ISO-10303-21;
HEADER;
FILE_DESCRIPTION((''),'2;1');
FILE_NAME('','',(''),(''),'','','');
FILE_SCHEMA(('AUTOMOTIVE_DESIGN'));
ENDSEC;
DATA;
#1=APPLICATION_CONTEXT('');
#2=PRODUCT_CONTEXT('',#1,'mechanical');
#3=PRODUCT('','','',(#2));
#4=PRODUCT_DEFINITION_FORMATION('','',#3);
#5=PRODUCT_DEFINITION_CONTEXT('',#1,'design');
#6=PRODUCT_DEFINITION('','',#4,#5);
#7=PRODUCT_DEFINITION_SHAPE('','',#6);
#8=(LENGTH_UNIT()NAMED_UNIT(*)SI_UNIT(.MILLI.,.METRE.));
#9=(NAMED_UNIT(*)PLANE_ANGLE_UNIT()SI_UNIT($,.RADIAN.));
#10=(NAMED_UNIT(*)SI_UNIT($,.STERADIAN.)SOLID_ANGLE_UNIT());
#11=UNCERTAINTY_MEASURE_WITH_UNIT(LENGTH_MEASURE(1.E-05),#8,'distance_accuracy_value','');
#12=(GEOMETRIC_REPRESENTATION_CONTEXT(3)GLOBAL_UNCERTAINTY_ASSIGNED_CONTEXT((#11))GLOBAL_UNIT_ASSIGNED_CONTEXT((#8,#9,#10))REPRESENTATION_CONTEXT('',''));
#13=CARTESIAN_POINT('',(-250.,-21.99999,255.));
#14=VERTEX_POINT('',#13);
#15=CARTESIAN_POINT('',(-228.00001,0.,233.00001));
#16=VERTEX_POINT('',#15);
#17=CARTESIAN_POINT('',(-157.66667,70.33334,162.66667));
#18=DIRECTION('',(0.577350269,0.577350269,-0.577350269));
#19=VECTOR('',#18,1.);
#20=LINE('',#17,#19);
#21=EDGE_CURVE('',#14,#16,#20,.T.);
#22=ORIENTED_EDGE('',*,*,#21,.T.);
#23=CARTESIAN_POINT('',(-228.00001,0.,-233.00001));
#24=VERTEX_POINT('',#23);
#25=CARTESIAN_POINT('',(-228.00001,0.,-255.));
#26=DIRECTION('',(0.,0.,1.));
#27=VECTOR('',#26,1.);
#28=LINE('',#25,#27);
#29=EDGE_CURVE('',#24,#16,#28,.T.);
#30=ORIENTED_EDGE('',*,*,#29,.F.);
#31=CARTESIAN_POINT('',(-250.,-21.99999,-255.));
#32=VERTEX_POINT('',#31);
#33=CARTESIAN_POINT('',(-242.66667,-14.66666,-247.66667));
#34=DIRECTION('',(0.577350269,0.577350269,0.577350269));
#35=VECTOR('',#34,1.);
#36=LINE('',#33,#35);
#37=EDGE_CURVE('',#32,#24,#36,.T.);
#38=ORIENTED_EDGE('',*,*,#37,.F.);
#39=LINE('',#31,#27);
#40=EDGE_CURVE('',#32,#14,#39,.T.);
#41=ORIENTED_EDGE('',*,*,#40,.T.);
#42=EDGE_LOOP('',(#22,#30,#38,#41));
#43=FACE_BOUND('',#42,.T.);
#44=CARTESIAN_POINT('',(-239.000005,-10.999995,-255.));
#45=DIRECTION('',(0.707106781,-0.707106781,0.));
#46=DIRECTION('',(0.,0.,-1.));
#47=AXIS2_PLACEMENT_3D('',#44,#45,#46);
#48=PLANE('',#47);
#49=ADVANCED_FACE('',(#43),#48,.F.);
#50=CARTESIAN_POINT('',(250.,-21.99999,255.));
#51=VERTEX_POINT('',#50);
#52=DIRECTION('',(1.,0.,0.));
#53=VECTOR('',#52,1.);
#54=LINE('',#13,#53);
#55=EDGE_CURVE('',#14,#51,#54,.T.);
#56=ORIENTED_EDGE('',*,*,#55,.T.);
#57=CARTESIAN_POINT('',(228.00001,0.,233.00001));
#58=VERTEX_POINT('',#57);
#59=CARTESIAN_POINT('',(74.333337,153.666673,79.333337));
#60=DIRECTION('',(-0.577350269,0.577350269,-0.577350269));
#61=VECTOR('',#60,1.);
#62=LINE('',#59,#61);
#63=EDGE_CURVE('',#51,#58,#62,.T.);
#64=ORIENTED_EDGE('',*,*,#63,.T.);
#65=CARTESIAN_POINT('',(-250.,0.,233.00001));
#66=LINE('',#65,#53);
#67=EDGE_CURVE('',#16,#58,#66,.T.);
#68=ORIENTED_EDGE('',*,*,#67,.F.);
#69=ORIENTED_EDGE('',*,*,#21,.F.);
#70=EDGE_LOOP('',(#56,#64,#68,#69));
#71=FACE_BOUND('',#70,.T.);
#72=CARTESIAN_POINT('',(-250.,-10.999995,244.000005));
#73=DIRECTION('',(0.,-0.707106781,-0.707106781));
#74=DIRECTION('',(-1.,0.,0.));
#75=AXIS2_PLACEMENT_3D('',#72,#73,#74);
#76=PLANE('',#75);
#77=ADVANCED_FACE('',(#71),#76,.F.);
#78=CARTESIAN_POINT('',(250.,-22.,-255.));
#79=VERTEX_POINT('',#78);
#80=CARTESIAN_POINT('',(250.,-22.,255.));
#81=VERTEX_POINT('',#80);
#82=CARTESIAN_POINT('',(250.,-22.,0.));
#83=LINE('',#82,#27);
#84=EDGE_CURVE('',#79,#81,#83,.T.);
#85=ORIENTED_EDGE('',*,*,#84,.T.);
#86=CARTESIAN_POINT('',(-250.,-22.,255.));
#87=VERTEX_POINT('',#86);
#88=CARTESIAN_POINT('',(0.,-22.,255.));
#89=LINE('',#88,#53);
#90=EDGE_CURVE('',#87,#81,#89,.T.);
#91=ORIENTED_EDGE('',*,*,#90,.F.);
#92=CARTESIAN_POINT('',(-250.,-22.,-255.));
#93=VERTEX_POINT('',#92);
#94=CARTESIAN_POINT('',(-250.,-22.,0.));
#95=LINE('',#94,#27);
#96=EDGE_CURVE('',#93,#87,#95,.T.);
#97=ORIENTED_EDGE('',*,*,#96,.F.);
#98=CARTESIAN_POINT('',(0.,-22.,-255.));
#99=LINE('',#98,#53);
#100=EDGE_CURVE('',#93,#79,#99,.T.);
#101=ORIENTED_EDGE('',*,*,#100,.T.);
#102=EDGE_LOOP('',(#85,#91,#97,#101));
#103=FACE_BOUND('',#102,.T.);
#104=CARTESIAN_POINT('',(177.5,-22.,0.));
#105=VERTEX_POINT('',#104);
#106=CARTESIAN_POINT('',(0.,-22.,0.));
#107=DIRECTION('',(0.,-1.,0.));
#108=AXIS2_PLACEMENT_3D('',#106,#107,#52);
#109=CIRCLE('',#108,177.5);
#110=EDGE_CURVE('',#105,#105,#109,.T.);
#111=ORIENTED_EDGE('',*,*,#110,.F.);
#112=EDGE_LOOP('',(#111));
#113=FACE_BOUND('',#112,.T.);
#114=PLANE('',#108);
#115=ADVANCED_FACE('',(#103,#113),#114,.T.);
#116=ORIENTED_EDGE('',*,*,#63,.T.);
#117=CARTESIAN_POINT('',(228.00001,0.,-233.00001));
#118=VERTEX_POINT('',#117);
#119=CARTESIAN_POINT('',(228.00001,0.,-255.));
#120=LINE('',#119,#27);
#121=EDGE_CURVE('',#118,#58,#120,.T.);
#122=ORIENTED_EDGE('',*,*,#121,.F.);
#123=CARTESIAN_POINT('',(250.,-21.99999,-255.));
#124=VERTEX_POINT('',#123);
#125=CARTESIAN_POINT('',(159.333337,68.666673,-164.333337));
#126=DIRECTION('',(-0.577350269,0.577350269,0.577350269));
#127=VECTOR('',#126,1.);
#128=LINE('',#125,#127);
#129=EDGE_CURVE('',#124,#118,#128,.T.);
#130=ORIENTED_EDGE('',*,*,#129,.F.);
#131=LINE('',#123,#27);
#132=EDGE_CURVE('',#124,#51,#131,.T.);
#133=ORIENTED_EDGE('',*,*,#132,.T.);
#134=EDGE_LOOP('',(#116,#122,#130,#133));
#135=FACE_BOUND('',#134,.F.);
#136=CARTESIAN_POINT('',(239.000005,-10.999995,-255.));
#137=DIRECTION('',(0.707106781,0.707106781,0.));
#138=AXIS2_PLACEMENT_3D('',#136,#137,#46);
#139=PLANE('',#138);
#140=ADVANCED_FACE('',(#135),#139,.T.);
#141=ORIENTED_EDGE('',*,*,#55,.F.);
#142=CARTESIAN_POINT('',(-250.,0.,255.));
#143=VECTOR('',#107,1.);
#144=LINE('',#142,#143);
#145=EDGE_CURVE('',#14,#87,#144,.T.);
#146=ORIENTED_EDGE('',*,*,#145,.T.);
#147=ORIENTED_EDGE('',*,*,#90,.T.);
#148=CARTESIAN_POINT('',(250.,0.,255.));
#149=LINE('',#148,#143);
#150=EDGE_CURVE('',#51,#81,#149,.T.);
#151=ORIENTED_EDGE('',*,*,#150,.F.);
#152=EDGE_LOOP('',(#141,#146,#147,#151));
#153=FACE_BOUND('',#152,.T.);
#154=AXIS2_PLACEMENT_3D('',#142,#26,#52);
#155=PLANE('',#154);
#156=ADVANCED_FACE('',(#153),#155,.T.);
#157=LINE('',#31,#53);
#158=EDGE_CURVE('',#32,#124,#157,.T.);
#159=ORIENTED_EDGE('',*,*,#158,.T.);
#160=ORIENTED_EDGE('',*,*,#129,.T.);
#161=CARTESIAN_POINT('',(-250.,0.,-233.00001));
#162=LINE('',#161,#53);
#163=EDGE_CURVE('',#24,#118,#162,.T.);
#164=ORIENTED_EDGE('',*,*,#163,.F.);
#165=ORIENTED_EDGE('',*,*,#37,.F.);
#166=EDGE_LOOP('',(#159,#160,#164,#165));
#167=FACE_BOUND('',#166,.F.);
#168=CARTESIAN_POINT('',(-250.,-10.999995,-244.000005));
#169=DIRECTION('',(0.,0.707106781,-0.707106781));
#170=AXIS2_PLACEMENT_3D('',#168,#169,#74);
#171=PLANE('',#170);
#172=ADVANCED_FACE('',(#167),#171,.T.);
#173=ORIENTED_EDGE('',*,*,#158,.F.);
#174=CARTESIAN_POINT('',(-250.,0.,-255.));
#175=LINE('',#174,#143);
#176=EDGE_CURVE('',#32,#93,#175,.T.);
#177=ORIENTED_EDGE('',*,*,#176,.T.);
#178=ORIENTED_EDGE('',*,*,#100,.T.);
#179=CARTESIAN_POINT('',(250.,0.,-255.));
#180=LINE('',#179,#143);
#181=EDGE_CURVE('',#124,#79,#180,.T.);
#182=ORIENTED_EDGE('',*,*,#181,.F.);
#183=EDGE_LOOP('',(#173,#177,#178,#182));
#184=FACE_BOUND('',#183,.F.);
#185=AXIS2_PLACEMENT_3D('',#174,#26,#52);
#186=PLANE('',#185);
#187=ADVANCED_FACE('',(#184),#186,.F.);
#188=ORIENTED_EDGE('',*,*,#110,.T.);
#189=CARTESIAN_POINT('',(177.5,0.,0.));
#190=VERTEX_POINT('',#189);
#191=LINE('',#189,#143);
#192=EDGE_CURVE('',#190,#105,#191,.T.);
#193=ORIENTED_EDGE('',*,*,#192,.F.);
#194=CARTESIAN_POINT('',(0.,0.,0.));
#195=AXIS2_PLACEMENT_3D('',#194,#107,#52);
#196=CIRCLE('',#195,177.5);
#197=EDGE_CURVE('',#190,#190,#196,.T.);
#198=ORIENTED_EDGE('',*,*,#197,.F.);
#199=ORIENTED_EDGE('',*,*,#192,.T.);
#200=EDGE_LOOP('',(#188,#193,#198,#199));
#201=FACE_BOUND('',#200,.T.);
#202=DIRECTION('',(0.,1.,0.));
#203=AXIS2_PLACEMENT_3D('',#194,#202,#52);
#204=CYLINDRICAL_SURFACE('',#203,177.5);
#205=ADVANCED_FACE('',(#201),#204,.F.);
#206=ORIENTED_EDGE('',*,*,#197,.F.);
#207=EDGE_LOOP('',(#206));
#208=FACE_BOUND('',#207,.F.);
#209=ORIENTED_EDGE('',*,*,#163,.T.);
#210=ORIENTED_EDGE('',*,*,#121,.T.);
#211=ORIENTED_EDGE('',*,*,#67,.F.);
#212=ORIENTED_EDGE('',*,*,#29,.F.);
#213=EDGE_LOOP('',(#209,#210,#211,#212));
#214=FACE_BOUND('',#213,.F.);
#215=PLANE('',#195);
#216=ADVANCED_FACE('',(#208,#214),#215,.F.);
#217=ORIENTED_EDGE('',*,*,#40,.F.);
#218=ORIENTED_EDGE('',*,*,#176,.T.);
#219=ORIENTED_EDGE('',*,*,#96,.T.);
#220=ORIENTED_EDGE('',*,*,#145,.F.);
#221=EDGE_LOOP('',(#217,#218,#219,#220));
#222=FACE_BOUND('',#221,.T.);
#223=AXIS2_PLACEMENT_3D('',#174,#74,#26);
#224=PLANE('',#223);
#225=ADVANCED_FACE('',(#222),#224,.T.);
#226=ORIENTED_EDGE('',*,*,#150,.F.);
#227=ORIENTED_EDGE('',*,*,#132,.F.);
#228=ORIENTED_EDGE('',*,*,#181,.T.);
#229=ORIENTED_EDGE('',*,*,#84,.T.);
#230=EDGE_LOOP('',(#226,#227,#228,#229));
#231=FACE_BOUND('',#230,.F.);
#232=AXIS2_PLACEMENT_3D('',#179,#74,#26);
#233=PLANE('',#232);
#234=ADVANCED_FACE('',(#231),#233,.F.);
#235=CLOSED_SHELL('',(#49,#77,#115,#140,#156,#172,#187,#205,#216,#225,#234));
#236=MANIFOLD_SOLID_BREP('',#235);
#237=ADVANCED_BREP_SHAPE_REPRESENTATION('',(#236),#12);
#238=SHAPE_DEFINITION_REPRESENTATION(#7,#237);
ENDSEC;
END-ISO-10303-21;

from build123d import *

# Parameters (mm, degrees)
F0_W     = 500
F0_H     = 510
F0_R     = 177.5
F1_DEPTH = 22
F2_SIZE  = 21.99999


# Not quite as in the source:
# - a fillet or chamfer is up to 0.001 mm smaller than in the source, because OpenCascade refuses the exact size


with BuildPart() as f1:
    # F0 (on Front) → F1 (new body)
    with BuildSketch(Plane.XZ):
        Rectangle(F0_W, F0_H)
        with BuildLine():
            Line((-161.5, 206.5), (161.5, 206.5))
            ThreePointArc((161.5, 206.5), (189.7842712475, 194.7842712475), (201.5, 166.5))
            Line((201.5, 166.5), (201.5, -166.5))
            ThreePointArc((201.5, -166.5), (189.7842712475, -194.7842712475), (161.5, -206.5))
            Line((161.5, -206.5), (-161.5, -206.5))
            ThreePointArc((-161.5, -206.5), (-189.7842712475, -194.7842712475), (-201.5, -166.5))
            Line((-201.5, -166.5), (-201.5, 166.5))
            ThreePointArc((-201.5, 166.5), (-189.7842712475, 194.7842712475), (-161.5, 206.5))
        make_face(mode=Mode.SUBTRACT)
        with BuildLine():
            ThreePointArc((201.5, 166.5), (189.7842712475, 194.7842712475), (161.5, 206.5))
            Line((161.5, 206.5), (-161.5, 206.5))
            ThreePointArc((-161.5, 206.5), (-189.7842712475, 194.7842712475), (-201.5, 166.5))
            Line((-201.5, 166.5), (-201.5, -166.5))
            ThreePointArc((-201.5, -166.5), (-189.7842712475, -194.7842712475), (-161.5, -206.5))
            Line((-161.5, -206.5), (161.5, -206.5))
            ThreePointArc((161.5, -206.5), (189.7842712475, -194.7842712475), (201.5, -166.5))
            Line((201.5, -166.5), (201.5, 166.5))
        make_face()
        Circle(F0_R, mode=Mode.SUBTRACT)
    extrude(amount=F1_DEPTH)

    # F2 (size 22 in the source; OpenCascade refuses exactly that, so slightly less here)
    f2_edges = [f1.edges().sort_by_distance(p)[0] for p in [
        (0, 0, 255),
        (250, 0, 0),
        (0, 0, -255),
        (-250, 0, 0),
    ]]
    chamfer(f2_edges, length=F2_SIZE)


solid = f1.part
